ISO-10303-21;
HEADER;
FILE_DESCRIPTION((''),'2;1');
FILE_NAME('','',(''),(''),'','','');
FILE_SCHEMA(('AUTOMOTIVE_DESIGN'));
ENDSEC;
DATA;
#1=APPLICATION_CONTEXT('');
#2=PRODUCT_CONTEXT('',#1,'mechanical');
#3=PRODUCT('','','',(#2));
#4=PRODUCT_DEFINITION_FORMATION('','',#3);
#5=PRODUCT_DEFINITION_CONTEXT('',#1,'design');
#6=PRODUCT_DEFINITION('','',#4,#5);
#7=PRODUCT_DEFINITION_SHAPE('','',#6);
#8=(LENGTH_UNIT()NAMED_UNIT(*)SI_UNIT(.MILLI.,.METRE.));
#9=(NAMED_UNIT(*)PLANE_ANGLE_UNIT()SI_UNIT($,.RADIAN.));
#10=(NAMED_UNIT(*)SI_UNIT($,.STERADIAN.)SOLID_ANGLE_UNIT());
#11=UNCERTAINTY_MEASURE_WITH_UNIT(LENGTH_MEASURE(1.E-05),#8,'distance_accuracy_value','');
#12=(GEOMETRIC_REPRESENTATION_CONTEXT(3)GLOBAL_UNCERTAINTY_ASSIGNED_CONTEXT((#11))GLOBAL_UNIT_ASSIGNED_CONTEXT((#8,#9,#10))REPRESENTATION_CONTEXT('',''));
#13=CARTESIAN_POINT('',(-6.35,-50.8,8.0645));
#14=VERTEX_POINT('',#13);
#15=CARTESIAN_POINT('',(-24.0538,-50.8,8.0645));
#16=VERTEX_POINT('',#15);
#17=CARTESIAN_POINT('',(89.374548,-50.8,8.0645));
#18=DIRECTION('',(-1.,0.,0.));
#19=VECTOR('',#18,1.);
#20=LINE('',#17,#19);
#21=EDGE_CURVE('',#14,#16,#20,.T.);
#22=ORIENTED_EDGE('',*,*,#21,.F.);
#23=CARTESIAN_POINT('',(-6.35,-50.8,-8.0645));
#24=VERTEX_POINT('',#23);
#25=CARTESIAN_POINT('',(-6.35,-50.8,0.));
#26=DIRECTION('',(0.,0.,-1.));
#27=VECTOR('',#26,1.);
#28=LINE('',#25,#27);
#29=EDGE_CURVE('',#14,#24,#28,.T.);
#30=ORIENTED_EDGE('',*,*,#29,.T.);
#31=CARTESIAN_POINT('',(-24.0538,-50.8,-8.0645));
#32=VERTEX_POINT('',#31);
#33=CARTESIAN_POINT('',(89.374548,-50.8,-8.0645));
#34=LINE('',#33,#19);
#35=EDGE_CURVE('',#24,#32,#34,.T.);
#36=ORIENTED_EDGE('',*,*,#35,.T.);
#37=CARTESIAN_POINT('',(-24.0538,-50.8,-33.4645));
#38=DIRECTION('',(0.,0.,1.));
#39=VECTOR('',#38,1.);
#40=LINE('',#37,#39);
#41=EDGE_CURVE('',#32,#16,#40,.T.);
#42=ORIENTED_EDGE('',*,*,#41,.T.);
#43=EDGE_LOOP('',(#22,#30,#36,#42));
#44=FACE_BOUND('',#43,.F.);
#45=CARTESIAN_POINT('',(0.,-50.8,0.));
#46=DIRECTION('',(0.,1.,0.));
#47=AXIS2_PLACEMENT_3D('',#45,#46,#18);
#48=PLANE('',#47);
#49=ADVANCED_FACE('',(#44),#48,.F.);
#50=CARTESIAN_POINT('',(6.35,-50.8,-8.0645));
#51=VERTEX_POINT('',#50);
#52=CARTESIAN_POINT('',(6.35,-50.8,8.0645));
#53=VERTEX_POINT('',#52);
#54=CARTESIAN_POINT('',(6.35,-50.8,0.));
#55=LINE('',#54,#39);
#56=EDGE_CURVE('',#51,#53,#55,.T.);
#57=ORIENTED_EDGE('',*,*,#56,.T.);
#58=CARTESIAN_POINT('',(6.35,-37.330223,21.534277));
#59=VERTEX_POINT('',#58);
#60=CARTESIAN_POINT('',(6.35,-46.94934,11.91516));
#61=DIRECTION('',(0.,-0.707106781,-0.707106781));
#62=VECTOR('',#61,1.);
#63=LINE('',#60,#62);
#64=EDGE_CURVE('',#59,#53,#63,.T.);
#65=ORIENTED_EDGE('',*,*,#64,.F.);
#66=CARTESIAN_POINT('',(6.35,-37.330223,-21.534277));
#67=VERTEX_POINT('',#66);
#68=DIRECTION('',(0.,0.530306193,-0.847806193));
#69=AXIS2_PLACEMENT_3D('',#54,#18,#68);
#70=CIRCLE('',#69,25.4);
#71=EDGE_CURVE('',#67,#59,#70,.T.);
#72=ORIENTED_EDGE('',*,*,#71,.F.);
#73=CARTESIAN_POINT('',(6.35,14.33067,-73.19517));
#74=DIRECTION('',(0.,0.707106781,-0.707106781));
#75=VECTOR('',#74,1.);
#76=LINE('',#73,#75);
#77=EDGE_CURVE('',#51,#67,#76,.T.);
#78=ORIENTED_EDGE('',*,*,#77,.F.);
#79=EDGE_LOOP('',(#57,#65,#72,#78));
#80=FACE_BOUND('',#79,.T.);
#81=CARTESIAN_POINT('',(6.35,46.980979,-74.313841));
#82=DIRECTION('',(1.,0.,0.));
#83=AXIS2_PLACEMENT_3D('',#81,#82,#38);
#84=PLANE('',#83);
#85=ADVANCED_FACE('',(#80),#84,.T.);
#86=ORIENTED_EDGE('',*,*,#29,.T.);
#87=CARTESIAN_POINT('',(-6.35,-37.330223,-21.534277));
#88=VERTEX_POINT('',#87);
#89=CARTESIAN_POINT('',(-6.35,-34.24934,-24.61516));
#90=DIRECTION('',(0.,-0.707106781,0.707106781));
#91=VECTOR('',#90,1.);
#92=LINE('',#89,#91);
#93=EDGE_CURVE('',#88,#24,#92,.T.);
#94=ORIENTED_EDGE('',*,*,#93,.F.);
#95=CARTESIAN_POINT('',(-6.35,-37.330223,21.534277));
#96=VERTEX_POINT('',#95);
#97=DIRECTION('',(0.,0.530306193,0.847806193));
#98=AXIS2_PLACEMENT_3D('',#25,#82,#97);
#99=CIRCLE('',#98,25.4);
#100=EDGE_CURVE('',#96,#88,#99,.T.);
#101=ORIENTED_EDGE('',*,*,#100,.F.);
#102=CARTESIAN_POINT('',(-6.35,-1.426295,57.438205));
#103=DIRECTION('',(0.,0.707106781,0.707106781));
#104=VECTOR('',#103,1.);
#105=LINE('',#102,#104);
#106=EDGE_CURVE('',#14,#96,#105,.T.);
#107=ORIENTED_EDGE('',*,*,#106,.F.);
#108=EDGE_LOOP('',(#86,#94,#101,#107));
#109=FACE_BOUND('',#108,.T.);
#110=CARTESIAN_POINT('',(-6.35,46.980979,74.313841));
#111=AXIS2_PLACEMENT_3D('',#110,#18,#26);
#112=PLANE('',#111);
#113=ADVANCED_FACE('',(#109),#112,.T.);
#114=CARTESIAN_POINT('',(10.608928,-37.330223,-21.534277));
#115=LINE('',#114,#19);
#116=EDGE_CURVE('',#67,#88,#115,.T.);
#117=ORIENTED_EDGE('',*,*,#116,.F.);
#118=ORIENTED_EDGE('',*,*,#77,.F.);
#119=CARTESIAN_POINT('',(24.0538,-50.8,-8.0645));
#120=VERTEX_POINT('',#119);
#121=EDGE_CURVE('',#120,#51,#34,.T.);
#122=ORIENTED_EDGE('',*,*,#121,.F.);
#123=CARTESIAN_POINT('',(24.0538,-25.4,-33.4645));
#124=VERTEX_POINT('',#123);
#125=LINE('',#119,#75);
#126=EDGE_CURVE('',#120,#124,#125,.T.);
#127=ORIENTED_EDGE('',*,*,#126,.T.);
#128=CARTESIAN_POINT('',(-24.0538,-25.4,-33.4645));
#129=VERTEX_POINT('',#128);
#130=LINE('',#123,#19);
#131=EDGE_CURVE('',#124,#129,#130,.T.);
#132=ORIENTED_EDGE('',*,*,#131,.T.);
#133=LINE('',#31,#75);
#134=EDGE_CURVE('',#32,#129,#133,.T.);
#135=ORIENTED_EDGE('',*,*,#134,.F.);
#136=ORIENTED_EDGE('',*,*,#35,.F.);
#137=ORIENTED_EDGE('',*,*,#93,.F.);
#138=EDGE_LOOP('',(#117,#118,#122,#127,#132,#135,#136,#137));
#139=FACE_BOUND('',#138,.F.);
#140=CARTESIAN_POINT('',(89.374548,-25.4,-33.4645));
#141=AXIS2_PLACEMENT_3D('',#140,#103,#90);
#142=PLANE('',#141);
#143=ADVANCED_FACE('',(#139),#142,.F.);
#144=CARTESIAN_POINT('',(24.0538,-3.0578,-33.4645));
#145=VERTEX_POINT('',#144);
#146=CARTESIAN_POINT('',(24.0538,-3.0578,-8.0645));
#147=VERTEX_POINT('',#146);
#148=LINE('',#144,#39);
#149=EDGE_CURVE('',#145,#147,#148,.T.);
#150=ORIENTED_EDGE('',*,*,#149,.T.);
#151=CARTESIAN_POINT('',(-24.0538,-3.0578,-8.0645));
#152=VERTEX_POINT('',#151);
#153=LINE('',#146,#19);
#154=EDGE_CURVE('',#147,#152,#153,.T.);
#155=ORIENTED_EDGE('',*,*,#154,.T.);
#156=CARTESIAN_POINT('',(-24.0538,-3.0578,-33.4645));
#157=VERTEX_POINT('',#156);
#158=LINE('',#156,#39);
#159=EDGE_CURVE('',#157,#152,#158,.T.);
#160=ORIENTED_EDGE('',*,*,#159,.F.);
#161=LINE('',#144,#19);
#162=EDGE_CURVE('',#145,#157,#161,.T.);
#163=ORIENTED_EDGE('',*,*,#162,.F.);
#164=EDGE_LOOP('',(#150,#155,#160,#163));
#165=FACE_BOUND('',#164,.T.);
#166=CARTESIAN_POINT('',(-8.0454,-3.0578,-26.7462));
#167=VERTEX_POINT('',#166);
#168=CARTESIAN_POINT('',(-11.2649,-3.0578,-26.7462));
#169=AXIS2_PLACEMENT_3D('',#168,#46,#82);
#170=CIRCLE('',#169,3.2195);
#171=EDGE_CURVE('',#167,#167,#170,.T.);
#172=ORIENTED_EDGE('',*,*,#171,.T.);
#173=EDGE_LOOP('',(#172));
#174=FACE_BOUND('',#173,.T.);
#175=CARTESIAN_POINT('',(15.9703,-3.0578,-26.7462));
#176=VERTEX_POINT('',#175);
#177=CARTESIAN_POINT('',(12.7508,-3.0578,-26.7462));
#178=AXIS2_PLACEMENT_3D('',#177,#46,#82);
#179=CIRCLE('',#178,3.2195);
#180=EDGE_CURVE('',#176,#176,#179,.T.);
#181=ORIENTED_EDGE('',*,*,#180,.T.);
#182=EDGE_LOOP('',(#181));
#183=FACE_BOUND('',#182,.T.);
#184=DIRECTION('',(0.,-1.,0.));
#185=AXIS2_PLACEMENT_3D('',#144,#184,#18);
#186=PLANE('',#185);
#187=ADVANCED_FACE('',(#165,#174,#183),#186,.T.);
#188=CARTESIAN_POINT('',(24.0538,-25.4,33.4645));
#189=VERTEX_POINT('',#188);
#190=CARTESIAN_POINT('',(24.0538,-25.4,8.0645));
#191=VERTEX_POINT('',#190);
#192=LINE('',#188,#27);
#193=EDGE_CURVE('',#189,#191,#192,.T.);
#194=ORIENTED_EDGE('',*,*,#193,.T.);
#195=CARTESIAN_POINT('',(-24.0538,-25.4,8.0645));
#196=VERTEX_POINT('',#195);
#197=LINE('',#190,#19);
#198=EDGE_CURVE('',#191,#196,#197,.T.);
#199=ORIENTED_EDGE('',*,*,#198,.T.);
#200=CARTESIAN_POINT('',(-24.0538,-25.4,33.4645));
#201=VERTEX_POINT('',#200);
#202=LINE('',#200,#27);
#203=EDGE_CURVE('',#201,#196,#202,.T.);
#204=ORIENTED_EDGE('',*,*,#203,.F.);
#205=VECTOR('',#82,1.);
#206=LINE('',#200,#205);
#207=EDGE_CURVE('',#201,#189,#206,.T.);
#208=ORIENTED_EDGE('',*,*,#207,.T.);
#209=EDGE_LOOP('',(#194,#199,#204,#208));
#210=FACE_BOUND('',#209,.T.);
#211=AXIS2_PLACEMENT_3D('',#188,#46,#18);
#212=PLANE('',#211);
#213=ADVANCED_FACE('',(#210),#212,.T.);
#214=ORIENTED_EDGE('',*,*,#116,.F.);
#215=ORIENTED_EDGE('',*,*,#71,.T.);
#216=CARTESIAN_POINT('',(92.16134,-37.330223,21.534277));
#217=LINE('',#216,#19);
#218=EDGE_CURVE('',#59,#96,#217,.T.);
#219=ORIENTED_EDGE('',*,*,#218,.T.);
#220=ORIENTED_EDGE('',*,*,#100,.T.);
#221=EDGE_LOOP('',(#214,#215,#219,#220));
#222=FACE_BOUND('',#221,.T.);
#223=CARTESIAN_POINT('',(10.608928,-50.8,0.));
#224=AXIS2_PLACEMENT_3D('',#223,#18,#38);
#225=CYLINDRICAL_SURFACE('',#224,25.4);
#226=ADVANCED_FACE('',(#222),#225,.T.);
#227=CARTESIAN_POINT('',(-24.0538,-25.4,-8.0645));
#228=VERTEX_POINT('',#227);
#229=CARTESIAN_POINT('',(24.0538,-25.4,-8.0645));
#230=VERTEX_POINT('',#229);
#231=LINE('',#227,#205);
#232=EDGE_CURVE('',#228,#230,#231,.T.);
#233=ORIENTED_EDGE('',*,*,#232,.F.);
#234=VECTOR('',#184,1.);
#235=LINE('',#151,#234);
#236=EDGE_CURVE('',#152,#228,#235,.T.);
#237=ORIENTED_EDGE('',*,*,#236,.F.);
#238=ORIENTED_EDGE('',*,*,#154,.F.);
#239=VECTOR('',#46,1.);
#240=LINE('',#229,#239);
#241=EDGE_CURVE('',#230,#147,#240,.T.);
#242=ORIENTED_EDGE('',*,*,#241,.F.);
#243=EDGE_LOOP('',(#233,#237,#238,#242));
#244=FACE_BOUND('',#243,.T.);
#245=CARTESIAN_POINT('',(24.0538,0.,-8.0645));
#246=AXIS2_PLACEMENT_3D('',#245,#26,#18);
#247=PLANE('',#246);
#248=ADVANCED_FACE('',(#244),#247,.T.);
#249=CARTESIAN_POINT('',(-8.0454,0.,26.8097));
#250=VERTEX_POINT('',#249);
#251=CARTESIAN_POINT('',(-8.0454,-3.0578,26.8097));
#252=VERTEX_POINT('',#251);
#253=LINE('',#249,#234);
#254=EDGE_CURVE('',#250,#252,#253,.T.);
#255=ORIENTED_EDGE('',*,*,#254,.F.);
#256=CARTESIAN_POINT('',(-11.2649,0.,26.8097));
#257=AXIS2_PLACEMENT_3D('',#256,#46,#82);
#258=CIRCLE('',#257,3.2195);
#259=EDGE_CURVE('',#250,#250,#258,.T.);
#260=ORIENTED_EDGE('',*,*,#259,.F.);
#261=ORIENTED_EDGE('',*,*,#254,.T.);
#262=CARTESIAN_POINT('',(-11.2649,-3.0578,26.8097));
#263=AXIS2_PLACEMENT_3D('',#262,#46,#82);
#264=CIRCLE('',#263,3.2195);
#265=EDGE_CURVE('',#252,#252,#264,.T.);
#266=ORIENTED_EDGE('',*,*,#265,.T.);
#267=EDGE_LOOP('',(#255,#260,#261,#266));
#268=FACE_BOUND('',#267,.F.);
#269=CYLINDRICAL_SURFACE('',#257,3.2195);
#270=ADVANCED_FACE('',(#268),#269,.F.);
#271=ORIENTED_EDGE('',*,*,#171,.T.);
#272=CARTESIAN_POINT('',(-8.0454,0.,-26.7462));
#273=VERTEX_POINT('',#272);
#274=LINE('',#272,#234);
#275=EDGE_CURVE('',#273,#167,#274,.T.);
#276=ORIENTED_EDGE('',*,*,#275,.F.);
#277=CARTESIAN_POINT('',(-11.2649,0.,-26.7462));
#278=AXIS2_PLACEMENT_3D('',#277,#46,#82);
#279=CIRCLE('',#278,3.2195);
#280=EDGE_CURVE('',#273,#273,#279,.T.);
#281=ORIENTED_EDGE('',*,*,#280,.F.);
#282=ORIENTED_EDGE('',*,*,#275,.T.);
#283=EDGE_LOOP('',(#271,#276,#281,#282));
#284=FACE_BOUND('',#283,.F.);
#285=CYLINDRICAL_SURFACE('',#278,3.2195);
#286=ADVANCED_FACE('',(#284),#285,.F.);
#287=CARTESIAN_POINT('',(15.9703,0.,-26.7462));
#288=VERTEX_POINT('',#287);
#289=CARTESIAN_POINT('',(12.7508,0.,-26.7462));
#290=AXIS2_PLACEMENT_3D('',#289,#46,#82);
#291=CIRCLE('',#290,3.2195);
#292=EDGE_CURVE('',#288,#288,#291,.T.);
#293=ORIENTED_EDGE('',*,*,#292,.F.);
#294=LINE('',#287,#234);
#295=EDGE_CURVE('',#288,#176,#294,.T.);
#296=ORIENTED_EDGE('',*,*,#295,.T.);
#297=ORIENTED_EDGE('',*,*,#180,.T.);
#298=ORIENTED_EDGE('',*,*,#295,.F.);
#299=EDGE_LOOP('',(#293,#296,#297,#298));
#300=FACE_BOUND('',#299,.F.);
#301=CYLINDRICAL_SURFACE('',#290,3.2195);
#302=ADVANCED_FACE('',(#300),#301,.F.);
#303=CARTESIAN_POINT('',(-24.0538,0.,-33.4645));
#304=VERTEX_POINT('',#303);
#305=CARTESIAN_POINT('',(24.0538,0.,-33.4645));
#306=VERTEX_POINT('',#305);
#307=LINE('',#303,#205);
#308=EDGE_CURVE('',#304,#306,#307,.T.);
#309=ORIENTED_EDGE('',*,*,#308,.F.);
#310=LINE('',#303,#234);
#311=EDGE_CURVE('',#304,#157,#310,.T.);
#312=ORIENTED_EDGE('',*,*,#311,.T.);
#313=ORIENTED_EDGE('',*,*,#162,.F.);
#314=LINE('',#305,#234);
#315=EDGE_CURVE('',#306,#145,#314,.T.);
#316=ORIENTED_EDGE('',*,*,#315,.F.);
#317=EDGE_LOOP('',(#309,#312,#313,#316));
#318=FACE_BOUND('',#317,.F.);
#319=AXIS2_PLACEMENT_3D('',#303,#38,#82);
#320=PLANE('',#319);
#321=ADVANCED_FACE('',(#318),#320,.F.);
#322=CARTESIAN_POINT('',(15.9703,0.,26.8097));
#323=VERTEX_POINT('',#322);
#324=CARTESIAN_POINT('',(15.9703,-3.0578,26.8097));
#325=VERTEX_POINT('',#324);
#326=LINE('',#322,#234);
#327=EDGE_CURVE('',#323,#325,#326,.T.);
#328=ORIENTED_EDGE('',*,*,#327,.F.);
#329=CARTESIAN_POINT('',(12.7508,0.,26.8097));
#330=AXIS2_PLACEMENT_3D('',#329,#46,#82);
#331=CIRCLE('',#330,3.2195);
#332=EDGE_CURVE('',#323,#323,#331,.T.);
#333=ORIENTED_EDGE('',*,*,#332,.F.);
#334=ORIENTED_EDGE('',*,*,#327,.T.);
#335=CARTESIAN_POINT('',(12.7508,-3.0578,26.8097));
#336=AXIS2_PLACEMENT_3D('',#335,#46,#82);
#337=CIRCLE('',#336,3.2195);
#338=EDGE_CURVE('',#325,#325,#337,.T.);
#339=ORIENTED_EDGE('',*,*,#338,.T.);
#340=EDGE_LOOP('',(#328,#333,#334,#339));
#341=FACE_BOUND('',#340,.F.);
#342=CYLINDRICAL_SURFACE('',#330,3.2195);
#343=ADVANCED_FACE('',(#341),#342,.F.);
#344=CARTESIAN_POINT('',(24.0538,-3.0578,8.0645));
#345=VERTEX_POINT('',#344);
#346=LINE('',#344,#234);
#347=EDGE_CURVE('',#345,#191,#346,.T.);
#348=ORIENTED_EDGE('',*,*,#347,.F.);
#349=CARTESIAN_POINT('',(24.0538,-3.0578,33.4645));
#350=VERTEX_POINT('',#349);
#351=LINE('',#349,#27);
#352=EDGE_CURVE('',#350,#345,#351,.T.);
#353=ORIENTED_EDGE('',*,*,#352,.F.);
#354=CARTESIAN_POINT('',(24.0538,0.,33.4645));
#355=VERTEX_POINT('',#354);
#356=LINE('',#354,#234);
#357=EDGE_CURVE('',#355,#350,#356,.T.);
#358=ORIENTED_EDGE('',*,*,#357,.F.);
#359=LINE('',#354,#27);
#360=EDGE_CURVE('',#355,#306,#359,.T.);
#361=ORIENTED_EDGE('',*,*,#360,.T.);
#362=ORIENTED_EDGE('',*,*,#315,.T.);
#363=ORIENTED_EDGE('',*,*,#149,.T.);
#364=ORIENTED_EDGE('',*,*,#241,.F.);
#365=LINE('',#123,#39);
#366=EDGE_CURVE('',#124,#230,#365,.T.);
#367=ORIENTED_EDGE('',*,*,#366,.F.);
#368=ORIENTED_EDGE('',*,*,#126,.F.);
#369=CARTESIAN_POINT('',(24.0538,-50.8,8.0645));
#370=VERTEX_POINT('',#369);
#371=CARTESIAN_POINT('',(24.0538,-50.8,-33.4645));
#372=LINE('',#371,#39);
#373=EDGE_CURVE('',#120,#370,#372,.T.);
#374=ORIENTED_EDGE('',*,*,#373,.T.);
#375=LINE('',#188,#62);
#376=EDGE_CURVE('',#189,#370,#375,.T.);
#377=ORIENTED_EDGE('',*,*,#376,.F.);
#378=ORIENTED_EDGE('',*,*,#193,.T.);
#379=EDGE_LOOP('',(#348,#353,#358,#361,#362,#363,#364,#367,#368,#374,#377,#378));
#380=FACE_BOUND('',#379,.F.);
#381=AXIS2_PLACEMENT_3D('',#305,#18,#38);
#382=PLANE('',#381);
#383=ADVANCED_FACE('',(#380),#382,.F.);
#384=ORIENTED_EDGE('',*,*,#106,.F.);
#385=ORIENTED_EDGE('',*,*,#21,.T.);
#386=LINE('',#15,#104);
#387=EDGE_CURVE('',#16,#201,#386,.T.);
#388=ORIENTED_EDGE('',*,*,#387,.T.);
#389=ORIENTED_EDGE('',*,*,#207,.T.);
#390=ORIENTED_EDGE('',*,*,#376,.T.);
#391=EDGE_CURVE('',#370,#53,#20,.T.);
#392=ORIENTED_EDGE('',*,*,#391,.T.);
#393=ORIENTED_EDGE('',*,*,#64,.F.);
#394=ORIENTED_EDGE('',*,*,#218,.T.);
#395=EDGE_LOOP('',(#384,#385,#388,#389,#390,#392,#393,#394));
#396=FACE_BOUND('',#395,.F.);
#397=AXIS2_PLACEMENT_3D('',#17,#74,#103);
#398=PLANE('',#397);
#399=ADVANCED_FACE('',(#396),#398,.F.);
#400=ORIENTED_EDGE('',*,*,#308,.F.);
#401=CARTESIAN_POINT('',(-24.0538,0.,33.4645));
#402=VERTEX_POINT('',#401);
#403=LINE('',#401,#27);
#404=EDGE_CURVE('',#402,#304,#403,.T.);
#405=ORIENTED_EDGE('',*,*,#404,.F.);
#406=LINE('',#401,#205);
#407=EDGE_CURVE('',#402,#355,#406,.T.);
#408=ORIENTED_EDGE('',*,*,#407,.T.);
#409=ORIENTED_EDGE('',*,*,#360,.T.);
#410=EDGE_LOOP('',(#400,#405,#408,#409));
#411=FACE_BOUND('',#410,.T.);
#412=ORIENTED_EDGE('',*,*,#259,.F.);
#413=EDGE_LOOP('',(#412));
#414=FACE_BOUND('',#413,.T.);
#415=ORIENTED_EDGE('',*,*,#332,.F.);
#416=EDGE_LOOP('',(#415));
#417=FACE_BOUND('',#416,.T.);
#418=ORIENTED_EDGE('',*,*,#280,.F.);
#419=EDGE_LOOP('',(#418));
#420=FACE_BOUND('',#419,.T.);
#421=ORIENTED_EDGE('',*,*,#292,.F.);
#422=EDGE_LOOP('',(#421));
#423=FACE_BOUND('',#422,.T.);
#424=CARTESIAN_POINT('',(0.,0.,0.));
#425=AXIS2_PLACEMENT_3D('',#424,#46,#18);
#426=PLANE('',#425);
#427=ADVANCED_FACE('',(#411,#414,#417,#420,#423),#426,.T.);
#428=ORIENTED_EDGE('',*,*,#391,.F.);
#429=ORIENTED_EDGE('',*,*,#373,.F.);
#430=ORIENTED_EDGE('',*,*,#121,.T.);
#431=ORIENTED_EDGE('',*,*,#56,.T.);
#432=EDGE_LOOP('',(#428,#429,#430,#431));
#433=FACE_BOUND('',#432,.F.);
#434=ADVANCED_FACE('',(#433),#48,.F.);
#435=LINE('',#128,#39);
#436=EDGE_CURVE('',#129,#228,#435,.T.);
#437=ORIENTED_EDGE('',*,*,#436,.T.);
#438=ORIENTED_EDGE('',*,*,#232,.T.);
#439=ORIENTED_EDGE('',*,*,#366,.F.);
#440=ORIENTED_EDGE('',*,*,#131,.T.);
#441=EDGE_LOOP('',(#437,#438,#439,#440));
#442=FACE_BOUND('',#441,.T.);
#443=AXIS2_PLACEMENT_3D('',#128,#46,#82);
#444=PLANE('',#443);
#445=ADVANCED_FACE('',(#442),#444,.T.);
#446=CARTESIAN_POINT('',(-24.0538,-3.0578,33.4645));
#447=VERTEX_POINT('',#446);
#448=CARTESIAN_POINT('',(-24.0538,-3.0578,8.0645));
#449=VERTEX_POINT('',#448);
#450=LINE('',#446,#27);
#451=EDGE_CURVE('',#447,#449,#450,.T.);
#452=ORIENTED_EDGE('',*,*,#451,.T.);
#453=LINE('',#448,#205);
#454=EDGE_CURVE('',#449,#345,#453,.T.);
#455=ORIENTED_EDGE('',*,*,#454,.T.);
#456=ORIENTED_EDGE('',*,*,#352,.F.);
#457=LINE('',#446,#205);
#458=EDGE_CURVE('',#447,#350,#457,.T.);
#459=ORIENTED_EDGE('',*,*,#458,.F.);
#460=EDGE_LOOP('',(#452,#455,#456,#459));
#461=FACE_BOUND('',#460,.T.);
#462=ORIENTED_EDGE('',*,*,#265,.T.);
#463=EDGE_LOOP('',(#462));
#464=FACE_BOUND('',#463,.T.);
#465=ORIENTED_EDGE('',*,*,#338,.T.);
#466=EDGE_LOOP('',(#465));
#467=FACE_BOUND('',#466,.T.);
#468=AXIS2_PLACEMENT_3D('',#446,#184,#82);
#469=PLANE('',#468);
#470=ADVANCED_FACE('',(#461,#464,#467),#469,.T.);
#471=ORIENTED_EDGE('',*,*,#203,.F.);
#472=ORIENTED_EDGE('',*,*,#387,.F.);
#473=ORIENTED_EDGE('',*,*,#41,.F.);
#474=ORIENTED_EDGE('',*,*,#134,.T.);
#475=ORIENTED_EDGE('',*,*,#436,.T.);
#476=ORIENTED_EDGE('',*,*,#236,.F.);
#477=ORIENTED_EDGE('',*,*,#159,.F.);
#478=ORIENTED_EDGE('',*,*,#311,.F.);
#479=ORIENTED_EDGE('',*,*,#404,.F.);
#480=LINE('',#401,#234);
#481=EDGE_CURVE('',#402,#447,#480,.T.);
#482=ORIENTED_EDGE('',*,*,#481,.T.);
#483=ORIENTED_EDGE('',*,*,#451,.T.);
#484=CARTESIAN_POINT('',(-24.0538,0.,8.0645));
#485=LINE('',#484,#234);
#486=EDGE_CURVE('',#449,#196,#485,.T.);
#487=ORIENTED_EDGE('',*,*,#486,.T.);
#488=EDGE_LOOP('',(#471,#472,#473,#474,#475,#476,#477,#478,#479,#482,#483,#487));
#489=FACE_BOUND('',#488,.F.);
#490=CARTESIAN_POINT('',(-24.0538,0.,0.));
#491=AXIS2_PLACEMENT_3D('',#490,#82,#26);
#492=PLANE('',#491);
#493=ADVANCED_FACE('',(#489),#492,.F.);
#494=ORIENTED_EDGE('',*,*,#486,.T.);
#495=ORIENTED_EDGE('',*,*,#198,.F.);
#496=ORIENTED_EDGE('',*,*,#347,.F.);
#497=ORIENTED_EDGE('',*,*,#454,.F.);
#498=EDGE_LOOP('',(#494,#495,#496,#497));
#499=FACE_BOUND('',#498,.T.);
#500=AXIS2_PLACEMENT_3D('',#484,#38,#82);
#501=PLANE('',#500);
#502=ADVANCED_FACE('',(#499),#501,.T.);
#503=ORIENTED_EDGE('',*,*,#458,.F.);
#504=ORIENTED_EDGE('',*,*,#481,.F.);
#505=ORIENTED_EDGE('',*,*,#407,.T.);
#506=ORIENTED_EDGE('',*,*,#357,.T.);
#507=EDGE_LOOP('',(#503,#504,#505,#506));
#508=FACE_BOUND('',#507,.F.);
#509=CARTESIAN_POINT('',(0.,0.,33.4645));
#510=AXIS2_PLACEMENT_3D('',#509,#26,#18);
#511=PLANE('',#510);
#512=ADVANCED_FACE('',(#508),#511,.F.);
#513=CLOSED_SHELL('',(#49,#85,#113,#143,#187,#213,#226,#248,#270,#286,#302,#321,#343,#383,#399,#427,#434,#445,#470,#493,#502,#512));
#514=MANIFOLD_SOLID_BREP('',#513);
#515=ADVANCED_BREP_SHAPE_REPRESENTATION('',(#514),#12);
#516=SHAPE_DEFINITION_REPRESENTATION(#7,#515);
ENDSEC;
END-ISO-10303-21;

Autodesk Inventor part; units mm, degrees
ref_plane "YZ Plane" through (0, 0, 0) normal (1, 0, 0) x (0, 1, 0)
ref_plane "XZ Plane" through (0, 0, 0) normal (0, 1, 0) x (-1, 0, 0)
ref_plane "XY Plane" through (0, 0, 0) normal (0, 0, 1) x (1, 0, 0)
sketch "Sketch10" plane through (0, 0, 0) normal (0, 1, 0) x (-1, 0, 0)
  line L0 (24.0538, -33.4645) -> (-24.0538, -33.4645)
  line L1 (-24.0538, -33.4645) -> (-24.0538, 33.4645)
  line L2 (-24.0538, 33.4645) -> (24.0538, 33.4645)
  line L3 (24.0538, 33.4645) -> (24.0538, -33.4645)
  line L4 (33.6753, 0) -> (-33.6753, 0) projected
  line L5 (0, -46.8503) -> (0, 46.8503) projected
  point P0 (0, 0)
  dimension "d17" = 66.929
  dimension "d18" = 48.1076
extrude "Extrusion4" add sketch "Sketch10" against normal blind 50.8
sketch "Sketch11" plane through (0, -50.8, 0) normal (0, -1, 0) x (1, 0, 0)
  line L0 (6.35, 25.4) -> (-6.35, 25.4)
  line L1 (-6.35, 25.4) -> (-6.35, 0)
  line L2 (-6.35, 0) -> (6.35, 0)
  line L3 (6.35, 0) -> (6.35, 25.4)
  line L4 (-33.6753, 0) -> (33.6753, 0) projected
  line L5 (0, -46.8503) -> (0, 46.8503) projected
  point P0 (0, 0)
  dimension "d21" = 25.4
  dimension "d22" = 12.7
revolve "Revolution3" add sketch "Sketch11" angle 360 about axis through (-6.35, -50.8, 0) along (1, 0, 0)
chamfer "Chamfer2" distance 25.4 angle 45 2 edges at (0, -50.8, -33.4645) (0, -50.8, 33.4645)
sketch "Sketch12" plane through (0, 0, 0) normal (0, 1, 0) x (1, 0, 0)
  circle A0 centre (12.7508, 26.7462) radius 3.2195
  line L0 (-24.0538, 33.4645) -> (24.0538, 33.4645) projected
  line L1 (24.0538, 33.4645) -> (24.0538, 8.0645) projected
  circle A1 centre (-11.2649, 26.7462) radius 3.2195
  circle A2 centre (12.7508, -26.8097) radius 3.2195
  circle A3 centre (-11.2649, -26.8097) radius 3.2195
  point P0 (0, 0)
  dimension "d27" = 6.4389
  dimension "d28" = 6.7183
  dimension "d29" = 11.303
  dimension "d32" = 24.0157
  dimension "d42" = 53.5559
  dimension "d46" = 24.0157
extrude "Extrusion5" cut sketch "Sketch12" against normal blind 5.08
sketch "Sketch13" plane through (-24.0538, 0, 33.4645) normal (0, 0, 1) x (1, 0, 0)
  line L0 (0, 0) -> (0, -25.4) projected
  line L1 (0, -3.0578) -> (48.1076, -3.0578)
  line L2 (48.1076, -3.0578) -> (48.1076, -25.4)
  line L3 (48.1076, -25.4) -> (0, -25.4)
  line L4 (0, -25.4) -> (0, -3.0578)
extrude "Extrusion6" cut sketch "Sketch13" against normal blind 25.4
sketch "Sketch14" plane through (24.0538, 0, -33.4645) normal (0, 0, -1) x (-1, 0, 0)
  line L0 (0, -3.0578) -> (48.1076, -3.0578)
  line L1 (48.1076, -3.0578) -> (48.1076, -25.4)
  line L2 (48.1076, -25.4) -> (0, -25.4)
  line L3 (0, -25.4) -> (0, -3.0578)
  point P0 (24.0538, 0)
extrude "Extrusion7" cut sketch "Sketch14" against normal blind 25.4
properties part number "caster wheel"
